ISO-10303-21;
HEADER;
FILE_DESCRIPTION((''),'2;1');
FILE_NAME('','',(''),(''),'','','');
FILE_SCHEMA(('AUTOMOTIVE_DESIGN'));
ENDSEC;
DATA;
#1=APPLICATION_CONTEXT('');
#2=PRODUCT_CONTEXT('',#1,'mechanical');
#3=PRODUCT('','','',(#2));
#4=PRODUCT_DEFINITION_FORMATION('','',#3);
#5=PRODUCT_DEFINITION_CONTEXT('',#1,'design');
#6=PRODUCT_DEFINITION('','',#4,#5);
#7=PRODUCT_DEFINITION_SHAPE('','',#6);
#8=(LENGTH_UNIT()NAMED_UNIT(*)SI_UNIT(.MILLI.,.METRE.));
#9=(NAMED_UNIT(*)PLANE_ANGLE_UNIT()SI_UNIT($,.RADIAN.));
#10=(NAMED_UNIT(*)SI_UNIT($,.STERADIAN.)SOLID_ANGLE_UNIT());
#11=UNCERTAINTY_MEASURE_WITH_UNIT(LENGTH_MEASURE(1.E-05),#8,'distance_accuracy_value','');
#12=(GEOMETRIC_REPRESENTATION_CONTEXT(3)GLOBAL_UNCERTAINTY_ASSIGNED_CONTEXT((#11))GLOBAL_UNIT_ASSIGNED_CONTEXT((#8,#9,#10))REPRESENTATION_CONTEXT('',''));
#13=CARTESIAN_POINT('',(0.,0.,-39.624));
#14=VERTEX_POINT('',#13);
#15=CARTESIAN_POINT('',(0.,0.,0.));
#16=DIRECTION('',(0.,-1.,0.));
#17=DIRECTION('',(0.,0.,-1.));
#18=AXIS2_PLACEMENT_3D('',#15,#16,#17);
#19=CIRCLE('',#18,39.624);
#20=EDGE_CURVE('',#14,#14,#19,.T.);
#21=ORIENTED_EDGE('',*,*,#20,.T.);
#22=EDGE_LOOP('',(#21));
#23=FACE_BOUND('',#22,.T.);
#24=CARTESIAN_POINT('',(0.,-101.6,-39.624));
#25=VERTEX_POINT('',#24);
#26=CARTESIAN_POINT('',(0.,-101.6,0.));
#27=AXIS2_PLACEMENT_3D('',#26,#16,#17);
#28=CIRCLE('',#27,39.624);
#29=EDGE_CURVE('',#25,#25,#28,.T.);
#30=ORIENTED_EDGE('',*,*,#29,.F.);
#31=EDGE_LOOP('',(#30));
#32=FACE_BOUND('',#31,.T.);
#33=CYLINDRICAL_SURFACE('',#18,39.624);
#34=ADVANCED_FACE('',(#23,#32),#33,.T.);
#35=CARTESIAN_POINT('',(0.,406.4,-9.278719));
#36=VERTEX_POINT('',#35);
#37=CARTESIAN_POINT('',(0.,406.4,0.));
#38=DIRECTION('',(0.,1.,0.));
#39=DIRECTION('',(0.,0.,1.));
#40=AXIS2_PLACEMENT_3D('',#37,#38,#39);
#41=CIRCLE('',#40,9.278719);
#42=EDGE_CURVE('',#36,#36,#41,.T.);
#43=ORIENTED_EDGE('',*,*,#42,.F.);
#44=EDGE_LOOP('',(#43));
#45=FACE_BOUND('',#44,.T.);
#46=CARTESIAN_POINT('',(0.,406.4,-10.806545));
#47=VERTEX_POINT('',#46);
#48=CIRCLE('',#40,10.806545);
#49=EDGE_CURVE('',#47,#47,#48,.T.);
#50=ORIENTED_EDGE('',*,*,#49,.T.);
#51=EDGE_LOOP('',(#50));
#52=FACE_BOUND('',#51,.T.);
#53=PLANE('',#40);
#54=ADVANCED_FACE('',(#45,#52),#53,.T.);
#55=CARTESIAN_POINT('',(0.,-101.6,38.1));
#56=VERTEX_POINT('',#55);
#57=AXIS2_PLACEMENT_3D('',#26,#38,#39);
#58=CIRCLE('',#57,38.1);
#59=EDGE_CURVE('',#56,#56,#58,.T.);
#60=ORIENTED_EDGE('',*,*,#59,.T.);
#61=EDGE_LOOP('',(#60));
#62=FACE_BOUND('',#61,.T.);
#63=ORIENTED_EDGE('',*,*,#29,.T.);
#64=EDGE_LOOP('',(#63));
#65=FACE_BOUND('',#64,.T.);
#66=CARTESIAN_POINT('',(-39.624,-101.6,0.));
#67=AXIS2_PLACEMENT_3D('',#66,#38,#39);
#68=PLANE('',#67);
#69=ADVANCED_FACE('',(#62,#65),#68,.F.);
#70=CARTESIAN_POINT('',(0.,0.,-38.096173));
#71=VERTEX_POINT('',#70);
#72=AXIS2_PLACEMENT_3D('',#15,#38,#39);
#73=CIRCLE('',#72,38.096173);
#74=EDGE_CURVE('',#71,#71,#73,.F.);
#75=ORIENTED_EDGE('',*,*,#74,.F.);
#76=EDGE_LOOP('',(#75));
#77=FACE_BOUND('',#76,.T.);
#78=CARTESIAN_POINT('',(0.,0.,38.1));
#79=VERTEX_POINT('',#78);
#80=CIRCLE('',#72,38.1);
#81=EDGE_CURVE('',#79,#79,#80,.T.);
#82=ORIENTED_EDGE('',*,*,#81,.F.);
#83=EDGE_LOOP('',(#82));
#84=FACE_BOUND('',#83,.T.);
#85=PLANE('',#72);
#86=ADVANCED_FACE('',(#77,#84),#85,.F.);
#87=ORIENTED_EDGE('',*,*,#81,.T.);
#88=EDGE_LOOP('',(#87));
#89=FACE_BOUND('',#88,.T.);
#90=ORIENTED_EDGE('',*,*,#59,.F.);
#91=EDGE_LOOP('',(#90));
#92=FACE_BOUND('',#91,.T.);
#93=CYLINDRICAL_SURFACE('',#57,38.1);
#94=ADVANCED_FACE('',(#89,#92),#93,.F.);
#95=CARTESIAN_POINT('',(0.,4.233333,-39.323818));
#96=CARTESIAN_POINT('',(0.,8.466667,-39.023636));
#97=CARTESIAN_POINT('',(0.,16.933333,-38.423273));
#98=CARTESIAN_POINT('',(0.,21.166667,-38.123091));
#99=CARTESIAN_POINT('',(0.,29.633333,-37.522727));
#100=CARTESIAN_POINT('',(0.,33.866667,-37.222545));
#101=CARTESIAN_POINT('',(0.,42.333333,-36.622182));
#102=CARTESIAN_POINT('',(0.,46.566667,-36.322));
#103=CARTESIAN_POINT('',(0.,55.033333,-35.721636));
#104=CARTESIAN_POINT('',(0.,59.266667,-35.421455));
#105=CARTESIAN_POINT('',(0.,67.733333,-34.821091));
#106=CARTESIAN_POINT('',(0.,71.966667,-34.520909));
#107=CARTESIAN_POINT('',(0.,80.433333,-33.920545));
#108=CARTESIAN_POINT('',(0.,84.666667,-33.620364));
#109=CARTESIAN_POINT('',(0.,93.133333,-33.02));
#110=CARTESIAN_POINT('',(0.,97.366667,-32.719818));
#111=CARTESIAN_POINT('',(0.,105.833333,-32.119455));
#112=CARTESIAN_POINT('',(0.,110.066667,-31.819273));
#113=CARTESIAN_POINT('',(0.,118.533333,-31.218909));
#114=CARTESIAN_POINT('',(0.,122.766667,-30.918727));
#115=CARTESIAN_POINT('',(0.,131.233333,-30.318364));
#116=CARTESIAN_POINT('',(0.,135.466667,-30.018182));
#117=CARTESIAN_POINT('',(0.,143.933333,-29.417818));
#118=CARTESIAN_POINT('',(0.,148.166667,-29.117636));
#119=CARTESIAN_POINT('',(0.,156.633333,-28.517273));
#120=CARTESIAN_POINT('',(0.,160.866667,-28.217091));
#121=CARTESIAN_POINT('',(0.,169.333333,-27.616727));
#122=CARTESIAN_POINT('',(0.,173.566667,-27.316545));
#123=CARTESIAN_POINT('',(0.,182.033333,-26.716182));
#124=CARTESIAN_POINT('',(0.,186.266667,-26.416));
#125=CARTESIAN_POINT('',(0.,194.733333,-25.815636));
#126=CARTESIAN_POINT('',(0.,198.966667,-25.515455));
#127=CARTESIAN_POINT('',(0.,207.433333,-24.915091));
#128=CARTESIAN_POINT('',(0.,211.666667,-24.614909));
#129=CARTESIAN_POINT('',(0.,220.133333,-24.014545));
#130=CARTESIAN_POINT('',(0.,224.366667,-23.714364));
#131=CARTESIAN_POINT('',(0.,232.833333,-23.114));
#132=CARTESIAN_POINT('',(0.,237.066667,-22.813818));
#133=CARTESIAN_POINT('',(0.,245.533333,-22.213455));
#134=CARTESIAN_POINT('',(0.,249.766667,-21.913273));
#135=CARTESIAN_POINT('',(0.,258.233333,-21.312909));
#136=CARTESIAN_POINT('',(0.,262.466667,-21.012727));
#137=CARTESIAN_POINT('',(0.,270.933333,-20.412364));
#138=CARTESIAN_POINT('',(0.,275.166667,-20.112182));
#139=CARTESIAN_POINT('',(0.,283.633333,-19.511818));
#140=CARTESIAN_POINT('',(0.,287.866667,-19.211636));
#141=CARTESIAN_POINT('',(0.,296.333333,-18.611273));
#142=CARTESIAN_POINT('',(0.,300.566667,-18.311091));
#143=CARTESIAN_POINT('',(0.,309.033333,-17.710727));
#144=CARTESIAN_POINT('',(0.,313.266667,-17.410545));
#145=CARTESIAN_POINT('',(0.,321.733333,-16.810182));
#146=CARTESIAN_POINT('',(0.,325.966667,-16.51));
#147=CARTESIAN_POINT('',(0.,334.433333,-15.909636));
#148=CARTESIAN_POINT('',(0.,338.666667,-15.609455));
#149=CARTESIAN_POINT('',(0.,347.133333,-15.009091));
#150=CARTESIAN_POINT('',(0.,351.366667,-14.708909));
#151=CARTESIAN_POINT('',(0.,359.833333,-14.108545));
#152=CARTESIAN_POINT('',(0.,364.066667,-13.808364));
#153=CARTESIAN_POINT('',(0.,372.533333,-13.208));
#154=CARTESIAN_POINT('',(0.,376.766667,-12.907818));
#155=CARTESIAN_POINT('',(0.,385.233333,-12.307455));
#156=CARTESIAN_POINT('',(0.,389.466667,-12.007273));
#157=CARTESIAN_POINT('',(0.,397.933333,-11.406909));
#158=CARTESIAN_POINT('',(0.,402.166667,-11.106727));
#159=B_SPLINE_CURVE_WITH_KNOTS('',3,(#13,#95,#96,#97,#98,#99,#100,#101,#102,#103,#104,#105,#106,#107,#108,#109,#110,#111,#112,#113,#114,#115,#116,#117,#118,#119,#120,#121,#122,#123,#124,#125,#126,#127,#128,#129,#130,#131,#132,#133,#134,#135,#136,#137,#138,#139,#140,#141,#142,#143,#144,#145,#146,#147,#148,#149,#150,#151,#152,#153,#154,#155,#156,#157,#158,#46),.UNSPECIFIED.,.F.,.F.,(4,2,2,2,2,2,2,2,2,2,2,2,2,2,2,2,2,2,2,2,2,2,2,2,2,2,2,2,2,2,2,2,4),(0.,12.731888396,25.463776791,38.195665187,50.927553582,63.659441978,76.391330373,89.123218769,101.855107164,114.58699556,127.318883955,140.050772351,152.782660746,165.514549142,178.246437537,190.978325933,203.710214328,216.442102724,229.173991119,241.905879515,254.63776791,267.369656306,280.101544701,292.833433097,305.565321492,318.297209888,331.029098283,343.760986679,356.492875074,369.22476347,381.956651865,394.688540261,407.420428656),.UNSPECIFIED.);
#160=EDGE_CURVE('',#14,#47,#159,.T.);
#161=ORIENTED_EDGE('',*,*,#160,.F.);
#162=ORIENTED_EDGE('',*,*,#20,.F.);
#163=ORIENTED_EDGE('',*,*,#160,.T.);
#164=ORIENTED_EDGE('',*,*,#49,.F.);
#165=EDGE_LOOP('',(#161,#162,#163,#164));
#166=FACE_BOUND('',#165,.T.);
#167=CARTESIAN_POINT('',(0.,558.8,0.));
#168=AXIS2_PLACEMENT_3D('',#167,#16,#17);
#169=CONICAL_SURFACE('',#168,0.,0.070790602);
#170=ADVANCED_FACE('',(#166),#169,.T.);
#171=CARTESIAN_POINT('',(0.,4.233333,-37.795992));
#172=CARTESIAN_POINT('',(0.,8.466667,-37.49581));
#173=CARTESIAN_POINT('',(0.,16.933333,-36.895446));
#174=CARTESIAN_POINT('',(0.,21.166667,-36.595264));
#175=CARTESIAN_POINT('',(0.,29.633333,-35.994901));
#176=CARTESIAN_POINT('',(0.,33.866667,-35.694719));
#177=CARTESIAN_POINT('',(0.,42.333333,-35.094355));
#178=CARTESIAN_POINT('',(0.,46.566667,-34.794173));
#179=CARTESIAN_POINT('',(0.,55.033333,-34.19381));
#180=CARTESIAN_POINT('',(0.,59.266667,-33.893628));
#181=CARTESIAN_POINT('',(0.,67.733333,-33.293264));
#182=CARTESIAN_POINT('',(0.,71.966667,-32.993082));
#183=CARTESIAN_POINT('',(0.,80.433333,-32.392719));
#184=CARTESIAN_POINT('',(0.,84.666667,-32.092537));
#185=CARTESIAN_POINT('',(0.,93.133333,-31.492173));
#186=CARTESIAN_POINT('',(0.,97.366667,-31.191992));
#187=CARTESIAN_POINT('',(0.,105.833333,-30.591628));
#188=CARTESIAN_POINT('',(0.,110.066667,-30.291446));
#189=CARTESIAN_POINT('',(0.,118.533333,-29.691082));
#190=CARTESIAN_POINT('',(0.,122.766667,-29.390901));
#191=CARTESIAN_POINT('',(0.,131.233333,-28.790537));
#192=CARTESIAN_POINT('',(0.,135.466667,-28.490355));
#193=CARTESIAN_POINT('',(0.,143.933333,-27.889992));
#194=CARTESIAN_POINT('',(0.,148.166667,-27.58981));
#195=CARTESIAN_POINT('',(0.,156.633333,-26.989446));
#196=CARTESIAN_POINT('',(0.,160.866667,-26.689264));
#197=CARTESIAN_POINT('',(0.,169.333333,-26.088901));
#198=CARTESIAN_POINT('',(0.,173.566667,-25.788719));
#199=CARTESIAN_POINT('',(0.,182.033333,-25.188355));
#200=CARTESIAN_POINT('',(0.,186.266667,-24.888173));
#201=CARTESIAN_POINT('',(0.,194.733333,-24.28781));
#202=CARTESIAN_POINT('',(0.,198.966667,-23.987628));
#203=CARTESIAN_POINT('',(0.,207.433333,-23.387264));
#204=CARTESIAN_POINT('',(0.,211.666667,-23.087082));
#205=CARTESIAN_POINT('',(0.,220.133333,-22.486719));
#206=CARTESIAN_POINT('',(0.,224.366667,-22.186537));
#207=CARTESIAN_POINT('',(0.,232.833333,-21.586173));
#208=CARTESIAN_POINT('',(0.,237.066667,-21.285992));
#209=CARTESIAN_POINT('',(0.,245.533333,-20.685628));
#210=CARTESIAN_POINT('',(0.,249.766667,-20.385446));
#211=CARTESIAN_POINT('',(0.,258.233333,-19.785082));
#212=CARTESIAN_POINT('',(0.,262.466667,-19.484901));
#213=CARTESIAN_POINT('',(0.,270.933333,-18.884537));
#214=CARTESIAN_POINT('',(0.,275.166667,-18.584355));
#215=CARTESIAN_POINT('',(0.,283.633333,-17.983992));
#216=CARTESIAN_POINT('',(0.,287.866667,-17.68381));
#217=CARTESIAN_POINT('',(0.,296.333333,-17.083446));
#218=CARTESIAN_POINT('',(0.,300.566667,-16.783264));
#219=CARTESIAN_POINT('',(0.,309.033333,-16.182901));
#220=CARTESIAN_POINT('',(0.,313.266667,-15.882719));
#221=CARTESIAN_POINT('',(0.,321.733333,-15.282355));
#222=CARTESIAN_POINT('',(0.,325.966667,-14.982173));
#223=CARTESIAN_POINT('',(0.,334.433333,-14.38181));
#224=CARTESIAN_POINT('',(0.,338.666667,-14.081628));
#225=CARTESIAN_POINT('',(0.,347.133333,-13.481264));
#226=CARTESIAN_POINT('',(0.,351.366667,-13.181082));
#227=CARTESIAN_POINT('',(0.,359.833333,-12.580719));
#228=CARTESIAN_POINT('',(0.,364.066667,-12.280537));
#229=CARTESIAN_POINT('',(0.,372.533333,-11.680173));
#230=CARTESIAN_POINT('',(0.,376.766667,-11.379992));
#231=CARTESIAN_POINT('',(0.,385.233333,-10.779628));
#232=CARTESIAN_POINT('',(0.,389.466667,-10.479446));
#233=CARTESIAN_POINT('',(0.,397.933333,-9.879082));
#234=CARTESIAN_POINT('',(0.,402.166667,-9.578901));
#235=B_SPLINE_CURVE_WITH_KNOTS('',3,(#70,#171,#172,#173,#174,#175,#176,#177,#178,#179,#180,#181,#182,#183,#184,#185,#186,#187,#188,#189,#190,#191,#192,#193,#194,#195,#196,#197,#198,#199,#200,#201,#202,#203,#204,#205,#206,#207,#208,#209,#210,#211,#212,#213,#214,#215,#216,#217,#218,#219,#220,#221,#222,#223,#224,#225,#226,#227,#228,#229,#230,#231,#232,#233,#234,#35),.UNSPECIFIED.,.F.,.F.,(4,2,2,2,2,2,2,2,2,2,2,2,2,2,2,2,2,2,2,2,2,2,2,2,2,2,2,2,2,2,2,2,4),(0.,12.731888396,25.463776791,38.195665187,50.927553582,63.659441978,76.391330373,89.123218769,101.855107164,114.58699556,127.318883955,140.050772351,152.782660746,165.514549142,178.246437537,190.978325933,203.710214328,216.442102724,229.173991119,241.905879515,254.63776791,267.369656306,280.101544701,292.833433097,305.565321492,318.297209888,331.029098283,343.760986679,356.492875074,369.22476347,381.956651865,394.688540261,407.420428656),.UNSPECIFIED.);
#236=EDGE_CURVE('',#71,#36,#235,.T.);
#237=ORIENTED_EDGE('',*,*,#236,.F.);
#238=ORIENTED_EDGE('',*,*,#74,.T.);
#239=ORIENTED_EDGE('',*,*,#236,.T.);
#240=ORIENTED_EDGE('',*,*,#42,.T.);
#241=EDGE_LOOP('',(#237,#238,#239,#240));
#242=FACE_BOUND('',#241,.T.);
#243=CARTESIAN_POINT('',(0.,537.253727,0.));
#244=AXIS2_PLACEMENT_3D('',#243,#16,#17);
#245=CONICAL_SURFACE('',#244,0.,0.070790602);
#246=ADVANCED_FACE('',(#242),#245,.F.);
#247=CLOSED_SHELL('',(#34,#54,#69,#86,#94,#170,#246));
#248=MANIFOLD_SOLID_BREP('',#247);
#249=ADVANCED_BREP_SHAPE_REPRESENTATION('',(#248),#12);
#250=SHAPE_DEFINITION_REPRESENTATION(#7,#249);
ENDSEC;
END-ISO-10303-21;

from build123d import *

# Parameters (mm, degrees)
SKETCH9_R          = 38.1
CUT_EXTRUDE2_DEPTH = 562.602673384
SKETCH3_R          = 39.624
CUT_EXTRUDE4_DEPTH = 512.081326945


# Read off the part's stored shape, not the designer's step: Shell6
with BuildPart() as part:
    # Sketch2 → Revolve1 (revolve)
    with BuildSketch(Plane.XY, mode=Mode.PRIVATE) as revolve1_sk:
        Polygon((0, 558.8), (-39.624, 0), (-39.624, -101.6), (0, -101.6), align=None)
    revolve(revolve1_sk.sketch.rotate(Axis((0, 0, 0), (0, 1, 0)), 270), axis=Axis((0, 0, 0), (0, 1, 0)))

    # Sketch9 → Cut-Extrude2 (cut, through all)
    with BuildSketch(Plane(origin=(0, 0, 0), x_dir=(1, 0, 0), z_dir=(0, 1, 0))):
        with Locations(Location((0, 0, 0), (0, 0, 270))):
            Circle(SKETCH9_R)
    extrude(amount=-CUT_EXTRUDE2_DEPTH, mode=Mode.SUBTRACT)

    # Shell6 outline → Shell6 (revolve, cut)
    with BuildSketch(Plane.XY):
        Polygon((38.096173393, 0), (0, 537.253727331), (0, 0), align=None)
    revolve(axis=Axis((0, 0, 0), (0, 1, 0)), mode=Mode.SUBTRACT)

    # Sketch3 → Cut-Extrude4 (cut, through all)
    with BuildSketch(Plane(origin=(0, 406.4, 0), x_dir=(1, 0, 0), z_dir=(0, 1, 0))):
        with Locations(Location((0, 0, 0), (0, 0, 90))):
            Circle(SKETCH3_R)
    extrude(amount=CUT_EXTRUDE4_DEPTH, mode=Mode.SUBTRACT)


solid = part.part
